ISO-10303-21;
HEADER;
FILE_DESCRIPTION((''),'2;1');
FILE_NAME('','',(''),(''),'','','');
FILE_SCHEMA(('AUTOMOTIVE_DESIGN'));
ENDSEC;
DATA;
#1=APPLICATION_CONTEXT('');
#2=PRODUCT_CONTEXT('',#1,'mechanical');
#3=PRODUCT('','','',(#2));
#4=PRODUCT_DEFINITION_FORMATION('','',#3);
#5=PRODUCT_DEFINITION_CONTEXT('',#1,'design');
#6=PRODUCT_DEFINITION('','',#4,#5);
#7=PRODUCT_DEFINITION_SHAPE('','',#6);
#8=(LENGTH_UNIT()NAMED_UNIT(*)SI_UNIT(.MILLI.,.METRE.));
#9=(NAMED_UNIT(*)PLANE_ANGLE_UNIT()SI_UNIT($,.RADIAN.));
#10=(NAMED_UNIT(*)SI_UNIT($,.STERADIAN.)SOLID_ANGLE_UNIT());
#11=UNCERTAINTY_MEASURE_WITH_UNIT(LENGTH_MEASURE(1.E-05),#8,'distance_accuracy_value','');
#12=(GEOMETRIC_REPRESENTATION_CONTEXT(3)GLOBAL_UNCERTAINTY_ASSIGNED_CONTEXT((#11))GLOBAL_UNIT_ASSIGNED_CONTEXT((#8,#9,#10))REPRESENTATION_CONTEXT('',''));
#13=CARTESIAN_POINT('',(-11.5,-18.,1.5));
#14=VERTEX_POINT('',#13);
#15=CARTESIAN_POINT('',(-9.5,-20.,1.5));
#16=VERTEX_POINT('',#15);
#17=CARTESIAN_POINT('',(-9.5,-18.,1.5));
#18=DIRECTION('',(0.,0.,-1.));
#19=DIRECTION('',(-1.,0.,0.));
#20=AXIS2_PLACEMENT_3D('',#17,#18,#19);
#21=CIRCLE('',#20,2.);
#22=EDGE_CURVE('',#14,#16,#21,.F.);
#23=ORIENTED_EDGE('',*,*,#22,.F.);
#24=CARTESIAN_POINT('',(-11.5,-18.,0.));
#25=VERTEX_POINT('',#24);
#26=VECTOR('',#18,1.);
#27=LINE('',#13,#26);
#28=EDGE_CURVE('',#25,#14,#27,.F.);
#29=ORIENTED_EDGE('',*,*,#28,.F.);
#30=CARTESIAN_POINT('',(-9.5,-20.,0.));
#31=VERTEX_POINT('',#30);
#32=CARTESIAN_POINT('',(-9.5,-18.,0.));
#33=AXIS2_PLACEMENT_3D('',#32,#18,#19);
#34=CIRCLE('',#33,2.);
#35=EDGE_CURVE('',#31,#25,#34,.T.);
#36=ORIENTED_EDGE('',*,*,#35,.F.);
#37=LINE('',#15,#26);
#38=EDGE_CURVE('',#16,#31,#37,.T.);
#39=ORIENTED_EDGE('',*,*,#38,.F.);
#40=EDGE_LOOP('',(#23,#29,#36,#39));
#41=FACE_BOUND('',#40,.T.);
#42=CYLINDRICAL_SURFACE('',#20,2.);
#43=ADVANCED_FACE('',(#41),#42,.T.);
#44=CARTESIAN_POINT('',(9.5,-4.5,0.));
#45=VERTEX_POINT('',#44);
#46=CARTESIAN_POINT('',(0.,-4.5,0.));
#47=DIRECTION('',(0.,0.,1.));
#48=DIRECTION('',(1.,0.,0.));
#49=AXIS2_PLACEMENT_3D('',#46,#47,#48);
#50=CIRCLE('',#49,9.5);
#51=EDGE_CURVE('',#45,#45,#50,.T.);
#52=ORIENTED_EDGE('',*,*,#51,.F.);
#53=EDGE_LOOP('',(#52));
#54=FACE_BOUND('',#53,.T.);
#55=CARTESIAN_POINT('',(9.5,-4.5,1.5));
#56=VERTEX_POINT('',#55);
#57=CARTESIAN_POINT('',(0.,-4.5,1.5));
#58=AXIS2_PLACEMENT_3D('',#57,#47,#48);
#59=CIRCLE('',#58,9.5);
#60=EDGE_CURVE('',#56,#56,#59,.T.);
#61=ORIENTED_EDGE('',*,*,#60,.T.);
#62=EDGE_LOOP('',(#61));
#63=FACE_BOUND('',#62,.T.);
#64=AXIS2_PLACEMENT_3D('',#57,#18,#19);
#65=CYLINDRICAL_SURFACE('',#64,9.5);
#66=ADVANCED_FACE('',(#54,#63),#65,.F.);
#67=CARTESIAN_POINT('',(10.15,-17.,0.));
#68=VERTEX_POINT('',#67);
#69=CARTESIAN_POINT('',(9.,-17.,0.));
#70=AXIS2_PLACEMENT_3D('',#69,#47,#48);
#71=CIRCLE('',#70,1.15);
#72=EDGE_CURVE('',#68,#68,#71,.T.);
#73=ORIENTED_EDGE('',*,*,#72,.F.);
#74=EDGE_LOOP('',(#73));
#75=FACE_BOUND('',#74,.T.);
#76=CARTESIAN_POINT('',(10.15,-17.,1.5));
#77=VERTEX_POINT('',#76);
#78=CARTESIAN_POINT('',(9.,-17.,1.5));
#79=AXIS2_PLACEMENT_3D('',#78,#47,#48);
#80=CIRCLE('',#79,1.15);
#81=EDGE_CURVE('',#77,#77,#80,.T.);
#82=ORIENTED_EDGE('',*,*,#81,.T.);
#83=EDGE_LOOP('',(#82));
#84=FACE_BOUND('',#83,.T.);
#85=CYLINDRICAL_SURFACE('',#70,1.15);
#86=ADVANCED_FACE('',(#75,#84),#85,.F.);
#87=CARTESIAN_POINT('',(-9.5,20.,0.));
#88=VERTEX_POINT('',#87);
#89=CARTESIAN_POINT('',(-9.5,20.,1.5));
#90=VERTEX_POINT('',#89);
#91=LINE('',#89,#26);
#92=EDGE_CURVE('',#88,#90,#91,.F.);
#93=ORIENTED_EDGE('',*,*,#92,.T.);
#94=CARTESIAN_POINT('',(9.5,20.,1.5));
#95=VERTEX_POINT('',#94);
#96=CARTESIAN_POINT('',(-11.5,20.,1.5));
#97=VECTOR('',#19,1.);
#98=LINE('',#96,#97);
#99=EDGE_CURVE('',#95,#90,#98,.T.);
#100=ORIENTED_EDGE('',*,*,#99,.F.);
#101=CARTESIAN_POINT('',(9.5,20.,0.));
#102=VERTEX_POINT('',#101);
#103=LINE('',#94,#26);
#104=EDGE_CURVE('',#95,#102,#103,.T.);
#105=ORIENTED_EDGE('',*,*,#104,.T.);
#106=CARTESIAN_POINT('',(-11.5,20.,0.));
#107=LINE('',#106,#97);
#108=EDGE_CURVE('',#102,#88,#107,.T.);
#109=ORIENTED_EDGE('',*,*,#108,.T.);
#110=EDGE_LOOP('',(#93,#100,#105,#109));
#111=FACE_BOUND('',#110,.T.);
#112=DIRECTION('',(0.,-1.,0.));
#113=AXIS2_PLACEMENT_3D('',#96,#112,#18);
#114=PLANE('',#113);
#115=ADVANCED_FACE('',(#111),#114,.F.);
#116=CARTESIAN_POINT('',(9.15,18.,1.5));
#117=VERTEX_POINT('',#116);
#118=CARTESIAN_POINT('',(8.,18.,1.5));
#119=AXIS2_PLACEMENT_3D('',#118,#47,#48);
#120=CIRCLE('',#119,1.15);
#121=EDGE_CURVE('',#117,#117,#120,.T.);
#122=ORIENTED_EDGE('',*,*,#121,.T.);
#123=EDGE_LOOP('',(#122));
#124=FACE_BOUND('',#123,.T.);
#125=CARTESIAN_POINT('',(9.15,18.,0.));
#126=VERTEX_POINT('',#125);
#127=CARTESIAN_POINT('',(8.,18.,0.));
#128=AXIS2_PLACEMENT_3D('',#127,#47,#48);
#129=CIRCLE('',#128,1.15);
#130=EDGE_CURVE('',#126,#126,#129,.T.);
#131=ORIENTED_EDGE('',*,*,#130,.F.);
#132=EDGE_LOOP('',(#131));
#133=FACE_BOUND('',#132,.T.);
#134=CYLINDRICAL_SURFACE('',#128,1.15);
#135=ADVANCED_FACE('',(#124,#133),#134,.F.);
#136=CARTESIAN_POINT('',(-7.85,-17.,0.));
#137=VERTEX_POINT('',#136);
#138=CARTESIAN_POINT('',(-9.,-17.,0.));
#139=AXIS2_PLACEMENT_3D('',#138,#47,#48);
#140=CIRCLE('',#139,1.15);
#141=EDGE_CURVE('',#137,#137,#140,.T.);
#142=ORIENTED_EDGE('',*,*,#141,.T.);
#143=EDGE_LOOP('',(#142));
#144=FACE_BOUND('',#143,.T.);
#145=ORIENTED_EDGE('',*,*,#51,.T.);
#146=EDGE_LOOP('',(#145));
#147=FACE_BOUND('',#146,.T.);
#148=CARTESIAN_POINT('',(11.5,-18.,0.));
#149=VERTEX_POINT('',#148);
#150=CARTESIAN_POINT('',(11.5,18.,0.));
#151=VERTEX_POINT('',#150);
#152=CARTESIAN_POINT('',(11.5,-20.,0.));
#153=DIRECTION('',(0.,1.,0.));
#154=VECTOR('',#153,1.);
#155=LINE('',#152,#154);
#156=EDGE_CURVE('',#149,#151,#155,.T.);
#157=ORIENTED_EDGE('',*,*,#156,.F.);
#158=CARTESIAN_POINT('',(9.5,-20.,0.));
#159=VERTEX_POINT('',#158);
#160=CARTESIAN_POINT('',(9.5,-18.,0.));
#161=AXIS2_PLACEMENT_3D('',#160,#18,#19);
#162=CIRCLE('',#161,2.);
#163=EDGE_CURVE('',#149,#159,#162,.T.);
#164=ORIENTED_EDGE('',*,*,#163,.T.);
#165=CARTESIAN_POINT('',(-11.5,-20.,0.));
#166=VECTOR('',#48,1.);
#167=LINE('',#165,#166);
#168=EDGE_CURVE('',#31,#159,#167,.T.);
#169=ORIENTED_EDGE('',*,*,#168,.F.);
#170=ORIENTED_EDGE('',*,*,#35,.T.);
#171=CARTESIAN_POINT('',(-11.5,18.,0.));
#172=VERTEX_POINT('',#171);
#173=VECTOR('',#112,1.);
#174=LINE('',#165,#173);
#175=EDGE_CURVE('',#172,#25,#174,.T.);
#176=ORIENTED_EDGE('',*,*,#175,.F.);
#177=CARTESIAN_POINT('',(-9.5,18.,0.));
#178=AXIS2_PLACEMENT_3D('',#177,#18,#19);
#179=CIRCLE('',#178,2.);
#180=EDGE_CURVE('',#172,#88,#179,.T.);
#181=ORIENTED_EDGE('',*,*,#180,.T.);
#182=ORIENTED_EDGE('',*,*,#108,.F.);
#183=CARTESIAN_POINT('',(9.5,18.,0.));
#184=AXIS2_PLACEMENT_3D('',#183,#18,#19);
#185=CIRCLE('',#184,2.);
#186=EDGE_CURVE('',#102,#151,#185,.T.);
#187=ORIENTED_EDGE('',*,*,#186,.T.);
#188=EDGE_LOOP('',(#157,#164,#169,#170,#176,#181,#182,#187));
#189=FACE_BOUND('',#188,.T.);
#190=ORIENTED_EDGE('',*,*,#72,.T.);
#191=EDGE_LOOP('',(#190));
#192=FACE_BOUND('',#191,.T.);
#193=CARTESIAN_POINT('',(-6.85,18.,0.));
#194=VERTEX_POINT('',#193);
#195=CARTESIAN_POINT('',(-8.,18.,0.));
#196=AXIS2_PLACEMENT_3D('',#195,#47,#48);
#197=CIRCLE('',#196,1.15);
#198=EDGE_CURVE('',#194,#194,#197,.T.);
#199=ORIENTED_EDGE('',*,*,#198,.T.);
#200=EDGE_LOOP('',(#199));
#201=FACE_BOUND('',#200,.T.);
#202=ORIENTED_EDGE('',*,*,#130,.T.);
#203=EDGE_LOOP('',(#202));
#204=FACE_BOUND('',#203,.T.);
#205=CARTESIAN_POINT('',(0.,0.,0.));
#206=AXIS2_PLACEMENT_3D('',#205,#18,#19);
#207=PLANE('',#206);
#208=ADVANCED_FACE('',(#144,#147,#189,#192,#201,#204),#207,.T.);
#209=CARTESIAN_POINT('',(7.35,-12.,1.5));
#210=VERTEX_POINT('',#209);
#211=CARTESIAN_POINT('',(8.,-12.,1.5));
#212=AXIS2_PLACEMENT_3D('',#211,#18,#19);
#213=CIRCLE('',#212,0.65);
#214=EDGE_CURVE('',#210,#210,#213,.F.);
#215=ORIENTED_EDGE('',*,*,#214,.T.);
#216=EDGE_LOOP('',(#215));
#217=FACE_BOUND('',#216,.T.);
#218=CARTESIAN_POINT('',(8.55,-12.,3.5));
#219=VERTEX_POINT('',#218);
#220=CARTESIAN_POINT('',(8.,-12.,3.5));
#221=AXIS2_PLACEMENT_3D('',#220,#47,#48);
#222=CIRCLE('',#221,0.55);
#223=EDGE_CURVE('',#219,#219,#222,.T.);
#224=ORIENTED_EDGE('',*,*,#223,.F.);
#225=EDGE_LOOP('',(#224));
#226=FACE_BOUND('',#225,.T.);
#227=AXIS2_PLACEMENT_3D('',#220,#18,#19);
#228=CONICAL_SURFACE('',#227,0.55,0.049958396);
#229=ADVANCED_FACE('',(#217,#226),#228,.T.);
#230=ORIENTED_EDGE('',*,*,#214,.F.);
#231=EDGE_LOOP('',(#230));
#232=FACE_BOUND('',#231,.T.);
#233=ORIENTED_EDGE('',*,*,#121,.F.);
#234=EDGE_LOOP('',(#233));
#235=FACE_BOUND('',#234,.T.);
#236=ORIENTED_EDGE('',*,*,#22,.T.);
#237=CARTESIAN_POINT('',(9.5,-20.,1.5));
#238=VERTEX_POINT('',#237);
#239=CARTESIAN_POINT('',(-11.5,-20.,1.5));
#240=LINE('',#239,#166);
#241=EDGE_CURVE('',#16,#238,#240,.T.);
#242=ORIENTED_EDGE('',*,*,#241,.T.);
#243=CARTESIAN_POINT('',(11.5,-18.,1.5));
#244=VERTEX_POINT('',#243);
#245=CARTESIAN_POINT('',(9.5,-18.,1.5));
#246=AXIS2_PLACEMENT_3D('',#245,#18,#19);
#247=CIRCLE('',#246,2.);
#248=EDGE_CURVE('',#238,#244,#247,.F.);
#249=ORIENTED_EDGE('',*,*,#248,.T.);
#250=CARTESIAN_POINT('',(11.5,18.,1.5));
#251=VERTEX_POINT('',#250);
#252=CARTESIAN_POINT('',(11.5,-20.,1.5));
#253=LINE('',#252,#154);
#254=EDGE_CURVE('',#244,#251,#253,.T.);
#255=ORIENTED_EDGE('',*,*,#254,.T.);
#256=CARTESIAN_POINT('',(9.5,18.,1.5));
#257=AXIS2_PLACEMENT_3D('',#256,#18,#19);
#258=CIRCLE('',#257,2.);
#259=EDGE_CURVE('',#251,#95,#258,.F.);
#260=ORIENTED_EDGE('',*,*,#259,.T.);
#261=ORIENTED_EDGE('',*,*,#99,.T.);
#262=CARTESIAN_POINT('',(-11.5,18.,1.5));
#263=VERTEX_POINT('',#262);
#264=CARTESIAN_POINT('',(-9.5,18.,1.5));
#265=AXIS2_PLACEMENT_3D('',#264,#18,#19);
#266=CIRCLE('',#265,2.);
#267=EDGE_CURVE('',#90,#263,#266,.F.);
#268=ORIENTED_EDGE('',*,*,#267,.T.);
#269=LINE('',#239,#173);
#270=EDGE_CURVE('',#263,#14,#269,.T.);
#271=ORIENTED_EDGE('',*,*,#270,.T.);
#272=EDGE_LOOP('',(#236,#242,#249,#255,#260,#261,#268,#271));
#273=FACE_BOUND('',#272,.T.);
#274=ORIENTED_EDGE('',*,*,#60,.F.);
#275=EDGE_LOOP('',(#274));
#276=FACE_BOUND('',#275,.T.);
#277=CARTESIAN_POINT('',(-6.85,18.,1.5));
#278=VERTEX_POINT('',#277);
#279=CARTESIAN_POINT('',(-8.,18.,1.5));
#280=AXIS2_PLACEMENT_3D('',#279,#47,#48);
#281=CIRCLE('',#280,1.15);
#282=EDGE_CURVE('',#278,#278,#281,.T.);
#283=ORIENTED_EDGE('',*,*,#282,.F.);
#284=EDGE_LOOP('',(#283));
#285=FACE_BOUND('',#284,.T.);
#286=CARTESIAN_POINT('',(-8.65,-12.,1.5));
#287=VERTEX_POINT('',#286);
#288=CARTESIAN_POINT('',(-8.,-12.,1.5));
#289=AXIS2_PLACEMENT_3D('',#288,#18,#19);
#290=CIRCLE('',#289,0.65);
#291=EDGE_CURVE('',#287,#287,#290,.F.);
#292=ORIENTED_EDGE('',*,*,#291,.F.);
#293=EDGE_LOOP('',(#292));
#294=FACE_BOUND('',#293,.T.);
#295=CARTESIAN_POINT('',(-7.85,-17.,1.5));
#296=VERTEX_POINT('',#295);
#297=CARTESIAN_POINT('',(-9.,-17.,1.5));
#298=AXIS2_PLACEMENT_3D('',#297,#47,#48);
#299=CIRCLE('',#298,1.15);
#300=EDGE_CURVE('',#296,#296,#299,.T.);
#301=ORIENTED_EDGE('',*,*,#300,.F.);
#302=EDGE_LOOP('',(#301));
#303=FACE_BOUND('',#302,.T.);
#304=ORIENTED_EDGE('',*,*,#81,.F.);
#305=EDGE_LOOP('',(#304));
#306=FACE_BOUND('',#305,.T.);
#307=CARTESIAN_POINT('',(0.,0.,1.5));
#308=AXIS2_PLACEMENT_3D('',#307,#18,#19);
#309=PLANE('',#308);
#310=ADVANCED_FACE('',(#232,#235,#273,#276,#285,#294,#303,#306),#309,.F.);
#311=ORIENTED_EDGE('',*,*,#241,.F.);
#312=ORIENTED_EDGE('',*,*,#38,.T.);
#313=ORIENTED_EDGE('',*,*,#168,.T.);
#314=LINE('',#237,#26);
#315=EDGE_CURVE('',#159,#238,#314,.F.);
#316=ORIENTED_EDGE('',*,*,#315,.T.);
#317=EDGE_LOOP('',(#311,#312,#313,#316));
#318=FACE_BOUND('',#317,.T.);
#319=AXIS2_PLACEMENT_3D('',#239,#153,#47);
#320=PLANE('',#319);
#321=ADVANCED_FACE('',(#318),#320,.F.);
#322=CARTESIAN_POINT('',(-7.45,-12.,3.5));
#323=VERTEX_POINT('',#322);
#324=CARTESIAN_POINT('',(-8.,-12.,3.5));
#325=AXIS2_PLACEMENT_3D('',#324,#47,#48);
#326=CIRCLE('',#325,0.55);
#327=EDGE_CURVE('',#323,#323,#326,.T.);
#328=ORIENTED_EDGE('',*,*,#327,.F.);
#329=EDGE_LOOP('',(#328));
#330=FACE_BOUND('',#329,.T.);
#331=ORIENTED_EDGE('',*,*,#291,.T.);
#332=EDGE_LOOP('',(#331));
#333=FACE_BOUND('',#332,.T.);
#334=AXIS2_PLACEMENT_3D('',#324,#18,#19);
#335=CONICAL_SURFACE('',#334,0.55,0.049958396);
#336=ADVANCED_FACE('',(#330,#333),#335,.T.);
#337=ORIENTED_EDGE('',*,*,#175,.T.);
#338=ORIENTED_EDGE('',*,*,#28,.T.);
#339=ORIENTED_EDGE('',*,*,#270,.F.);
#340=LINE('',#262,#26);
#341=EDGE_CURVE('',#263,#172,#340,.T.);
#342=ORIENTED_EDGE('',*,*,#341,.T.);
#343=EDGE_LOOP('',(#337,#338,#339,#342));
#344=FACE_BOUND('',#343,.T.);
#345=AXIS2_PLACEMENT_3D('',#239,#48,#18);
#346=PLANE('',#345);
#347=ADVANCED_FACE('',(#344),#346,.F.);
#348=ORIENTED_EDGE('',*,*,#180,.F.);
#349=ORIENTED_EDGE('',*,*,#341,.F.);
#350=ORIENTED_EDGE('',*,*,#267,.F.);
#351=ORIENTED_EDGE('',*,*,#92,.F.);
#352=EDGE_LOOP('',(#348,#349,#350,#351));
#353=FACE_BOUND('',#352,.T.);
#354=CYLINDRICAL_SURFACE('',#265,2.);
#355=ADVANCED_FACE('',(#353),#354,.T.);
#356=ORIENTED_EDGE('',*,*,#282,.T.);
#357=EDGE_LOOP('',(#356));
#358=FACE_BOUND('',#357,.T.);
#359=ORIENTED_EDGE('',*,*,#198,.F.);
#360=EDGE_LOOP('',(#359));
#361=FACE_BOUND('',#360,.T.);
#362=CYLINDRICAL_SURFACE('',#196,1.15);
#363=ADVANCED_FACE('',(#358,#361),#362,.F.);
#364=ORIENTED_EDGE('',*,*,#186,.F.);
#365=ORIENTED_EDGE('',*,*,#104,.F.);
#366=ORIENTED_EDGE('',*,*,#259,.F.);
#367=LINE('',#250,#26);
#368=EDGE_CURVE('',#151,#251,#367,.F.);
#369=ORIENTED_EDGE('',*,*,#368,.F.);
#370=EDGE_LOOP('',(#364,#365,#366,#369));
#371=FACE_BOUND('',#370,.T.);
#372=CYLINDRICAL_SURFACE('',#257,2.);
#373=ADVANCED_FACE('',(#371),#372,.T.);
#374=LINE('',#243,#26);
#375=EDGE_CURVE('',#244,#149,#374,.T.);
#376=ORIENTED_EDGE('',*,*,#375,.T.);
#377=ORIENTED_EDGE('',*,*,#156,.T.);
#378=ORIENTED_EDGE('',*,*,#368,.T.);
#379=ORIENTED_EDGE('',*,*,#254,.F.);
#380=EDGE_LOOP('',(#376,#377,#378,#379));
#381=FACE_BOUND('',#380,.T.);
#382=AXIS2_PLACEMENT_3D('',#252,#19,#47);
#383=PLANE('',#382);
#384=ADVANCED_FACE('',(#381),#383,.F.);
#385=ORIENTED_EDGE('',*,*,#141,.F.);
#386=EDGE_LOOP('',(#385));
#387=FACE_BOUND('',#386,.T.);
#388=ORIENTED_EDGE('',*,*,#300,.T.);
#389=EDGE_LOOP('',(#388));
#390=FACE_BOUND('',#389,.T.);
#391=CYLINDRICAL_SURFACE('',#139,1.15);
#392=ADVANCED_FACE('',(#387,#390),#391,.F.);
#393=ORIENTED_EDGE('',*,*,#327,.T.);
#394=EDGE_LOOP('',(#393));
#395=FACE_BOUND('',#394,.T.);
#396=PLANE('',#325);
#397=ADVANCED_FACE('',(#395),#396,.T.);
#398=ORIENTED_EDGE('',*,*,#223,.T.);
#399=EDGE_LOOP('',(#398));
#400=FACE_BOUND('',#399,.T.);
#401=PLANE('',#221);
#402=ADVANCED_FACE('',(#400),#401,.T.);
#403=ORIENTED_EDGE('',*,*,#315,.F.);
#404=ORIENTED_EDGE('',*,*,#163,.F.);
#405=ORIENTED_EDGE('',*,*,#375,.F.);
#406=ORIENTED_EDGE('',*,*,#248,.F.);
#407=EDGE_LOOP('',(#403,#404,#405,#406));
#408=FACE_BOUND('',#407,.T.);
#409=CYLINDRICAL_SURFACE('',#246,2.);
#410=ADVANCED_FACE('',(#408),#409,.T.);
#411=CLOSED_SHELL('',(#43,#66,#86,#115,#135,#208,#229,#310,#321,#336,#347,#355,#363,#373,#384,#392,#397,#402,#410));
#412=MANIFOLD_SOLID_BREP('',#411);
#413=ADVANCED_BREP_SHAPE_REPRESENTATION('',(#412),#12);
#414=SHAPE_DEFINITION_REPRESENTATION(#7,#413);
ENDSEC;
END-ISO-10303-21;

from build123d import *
from OCP.BRepFilletAPI import BRepFilletAPI_MakeChamfer

# Parameters (mm, degrees)
SKETCH_1_W          = 23
SKETCH_1_H          = 40
SKETCH_1_R          = 9.5
EXTRUDE_1_DEPTH     = 1.5
FILLET_1_R          = 2
SKETCH_3_R          = 1.15
CUT_EXTRUDE_1_DEPTH = 24.119256043
SKETCH_4_R          = 0.65
EXTRUDE_2_DEPTH     = 2
CHAMFER_1_SIZE      = 2
CHAMFER_1_SIZE_2    = 0.1


with BuildPart() as part:
    # 草图1 → 凸台-拉伸1 (new body)
    with BuildSketch(Plane.XY):
        Rectangle(SKETCH_1_W, SKETCH_1_H)
        with Locations((0, -4.5)):
            Circle(SKETCH_1_R, mode=Mode.SUBTRACT)
    extrude(amount=EXTRUDE_1_DEPTH)

    # 圆角1
    fillet_1_edges = [part.edges().sort_by_distance(p)[0] for p in [
        (11.5, -20, 0.75),
        (-11.5, -20, 0.75),
        (-11.5, 20, 0.75),
        (11.5, 20, 0.75),
    ]]
    fillet(fillet_1_edges, radius=FILLET_1_R)

    # 草图3 → 切除-拉伸1 (cut, through all)
    with BuildSketch(Plane.XY.offset(1.5)):
        with Locations((-8, 18)):
            Circle(SKETCH_3_R)
        with Locations((8, 18)):
            Circle(SKETCH_3_R)
        with Locations((-9, -17)):
            Circle(SKETCH_3_R)
        with Locations((9, -17)):
            Circle(SKETCH_3_R)
    extrude(amount=-CUT_EXTRUDE_1_DEPTH, mode=Mode.SUBTRACT)

    # 草图4 → 凸台-拉伸2 (add)
    with BuildSketch(Plane.XY.offset(1.5)):
        with Locations(Location((-8, -12, 0), (0, 0, 180))):
            Circle(SKETCH_4_R)
        with Locations(Location((8, -12, 0), (0, 0, 180))):
            Circle(SKETCH_4_R)
    extrude(amount=EXTRUDE_2_DEPTH)

    # 倒角1
    chamfer_1_edges_1 = [part.edges().sort_by_distance(p)[0] for p in [
        (-7.35, -12, 3.5),
    ]]
    chamfer_1_side_1 = [part.faces().sort_by_distance(p)[0] for p in [
        (-7.35, -12, 3.498),
    ]]
    chamfer_1_edges_2 = [part.edges().sort_by_distance(p)[0] for p in [
        (8.65, -12, 3.5),
    ]]
    chamfer_1_side_2 = [part.faces().sort_by_distance(p)[0] for p in [
        (8.65, -12, 3.498),
    ]]
    chamfer_1 = BRepFilletAPI_MakeChamfer(part.part.solid().wrapped)
    for e in chamfer_1_edges_1:
        chamfer_1.Add(CHAMFER_1_SIZE - 0.0001, CHAMFER_1_SIZE_2 - 0.0001, e.wrapped, chamfer_1_side_1[0].wrapped)
    for e in chamfer_1_edges_2:
        chamfer_1.Add(CHAMFER_1_SIZE - 0.0001, CHAMFER_1_SIZE_2 - 0.0001, e.wrapped, chamfer_1_side_2[0].wrapped)
    add(Compound.cast(chamfer_1.Shape()), mode=Mode.REPLACE)  # a hair under: the kernel refuses the full size


solid = part.part
